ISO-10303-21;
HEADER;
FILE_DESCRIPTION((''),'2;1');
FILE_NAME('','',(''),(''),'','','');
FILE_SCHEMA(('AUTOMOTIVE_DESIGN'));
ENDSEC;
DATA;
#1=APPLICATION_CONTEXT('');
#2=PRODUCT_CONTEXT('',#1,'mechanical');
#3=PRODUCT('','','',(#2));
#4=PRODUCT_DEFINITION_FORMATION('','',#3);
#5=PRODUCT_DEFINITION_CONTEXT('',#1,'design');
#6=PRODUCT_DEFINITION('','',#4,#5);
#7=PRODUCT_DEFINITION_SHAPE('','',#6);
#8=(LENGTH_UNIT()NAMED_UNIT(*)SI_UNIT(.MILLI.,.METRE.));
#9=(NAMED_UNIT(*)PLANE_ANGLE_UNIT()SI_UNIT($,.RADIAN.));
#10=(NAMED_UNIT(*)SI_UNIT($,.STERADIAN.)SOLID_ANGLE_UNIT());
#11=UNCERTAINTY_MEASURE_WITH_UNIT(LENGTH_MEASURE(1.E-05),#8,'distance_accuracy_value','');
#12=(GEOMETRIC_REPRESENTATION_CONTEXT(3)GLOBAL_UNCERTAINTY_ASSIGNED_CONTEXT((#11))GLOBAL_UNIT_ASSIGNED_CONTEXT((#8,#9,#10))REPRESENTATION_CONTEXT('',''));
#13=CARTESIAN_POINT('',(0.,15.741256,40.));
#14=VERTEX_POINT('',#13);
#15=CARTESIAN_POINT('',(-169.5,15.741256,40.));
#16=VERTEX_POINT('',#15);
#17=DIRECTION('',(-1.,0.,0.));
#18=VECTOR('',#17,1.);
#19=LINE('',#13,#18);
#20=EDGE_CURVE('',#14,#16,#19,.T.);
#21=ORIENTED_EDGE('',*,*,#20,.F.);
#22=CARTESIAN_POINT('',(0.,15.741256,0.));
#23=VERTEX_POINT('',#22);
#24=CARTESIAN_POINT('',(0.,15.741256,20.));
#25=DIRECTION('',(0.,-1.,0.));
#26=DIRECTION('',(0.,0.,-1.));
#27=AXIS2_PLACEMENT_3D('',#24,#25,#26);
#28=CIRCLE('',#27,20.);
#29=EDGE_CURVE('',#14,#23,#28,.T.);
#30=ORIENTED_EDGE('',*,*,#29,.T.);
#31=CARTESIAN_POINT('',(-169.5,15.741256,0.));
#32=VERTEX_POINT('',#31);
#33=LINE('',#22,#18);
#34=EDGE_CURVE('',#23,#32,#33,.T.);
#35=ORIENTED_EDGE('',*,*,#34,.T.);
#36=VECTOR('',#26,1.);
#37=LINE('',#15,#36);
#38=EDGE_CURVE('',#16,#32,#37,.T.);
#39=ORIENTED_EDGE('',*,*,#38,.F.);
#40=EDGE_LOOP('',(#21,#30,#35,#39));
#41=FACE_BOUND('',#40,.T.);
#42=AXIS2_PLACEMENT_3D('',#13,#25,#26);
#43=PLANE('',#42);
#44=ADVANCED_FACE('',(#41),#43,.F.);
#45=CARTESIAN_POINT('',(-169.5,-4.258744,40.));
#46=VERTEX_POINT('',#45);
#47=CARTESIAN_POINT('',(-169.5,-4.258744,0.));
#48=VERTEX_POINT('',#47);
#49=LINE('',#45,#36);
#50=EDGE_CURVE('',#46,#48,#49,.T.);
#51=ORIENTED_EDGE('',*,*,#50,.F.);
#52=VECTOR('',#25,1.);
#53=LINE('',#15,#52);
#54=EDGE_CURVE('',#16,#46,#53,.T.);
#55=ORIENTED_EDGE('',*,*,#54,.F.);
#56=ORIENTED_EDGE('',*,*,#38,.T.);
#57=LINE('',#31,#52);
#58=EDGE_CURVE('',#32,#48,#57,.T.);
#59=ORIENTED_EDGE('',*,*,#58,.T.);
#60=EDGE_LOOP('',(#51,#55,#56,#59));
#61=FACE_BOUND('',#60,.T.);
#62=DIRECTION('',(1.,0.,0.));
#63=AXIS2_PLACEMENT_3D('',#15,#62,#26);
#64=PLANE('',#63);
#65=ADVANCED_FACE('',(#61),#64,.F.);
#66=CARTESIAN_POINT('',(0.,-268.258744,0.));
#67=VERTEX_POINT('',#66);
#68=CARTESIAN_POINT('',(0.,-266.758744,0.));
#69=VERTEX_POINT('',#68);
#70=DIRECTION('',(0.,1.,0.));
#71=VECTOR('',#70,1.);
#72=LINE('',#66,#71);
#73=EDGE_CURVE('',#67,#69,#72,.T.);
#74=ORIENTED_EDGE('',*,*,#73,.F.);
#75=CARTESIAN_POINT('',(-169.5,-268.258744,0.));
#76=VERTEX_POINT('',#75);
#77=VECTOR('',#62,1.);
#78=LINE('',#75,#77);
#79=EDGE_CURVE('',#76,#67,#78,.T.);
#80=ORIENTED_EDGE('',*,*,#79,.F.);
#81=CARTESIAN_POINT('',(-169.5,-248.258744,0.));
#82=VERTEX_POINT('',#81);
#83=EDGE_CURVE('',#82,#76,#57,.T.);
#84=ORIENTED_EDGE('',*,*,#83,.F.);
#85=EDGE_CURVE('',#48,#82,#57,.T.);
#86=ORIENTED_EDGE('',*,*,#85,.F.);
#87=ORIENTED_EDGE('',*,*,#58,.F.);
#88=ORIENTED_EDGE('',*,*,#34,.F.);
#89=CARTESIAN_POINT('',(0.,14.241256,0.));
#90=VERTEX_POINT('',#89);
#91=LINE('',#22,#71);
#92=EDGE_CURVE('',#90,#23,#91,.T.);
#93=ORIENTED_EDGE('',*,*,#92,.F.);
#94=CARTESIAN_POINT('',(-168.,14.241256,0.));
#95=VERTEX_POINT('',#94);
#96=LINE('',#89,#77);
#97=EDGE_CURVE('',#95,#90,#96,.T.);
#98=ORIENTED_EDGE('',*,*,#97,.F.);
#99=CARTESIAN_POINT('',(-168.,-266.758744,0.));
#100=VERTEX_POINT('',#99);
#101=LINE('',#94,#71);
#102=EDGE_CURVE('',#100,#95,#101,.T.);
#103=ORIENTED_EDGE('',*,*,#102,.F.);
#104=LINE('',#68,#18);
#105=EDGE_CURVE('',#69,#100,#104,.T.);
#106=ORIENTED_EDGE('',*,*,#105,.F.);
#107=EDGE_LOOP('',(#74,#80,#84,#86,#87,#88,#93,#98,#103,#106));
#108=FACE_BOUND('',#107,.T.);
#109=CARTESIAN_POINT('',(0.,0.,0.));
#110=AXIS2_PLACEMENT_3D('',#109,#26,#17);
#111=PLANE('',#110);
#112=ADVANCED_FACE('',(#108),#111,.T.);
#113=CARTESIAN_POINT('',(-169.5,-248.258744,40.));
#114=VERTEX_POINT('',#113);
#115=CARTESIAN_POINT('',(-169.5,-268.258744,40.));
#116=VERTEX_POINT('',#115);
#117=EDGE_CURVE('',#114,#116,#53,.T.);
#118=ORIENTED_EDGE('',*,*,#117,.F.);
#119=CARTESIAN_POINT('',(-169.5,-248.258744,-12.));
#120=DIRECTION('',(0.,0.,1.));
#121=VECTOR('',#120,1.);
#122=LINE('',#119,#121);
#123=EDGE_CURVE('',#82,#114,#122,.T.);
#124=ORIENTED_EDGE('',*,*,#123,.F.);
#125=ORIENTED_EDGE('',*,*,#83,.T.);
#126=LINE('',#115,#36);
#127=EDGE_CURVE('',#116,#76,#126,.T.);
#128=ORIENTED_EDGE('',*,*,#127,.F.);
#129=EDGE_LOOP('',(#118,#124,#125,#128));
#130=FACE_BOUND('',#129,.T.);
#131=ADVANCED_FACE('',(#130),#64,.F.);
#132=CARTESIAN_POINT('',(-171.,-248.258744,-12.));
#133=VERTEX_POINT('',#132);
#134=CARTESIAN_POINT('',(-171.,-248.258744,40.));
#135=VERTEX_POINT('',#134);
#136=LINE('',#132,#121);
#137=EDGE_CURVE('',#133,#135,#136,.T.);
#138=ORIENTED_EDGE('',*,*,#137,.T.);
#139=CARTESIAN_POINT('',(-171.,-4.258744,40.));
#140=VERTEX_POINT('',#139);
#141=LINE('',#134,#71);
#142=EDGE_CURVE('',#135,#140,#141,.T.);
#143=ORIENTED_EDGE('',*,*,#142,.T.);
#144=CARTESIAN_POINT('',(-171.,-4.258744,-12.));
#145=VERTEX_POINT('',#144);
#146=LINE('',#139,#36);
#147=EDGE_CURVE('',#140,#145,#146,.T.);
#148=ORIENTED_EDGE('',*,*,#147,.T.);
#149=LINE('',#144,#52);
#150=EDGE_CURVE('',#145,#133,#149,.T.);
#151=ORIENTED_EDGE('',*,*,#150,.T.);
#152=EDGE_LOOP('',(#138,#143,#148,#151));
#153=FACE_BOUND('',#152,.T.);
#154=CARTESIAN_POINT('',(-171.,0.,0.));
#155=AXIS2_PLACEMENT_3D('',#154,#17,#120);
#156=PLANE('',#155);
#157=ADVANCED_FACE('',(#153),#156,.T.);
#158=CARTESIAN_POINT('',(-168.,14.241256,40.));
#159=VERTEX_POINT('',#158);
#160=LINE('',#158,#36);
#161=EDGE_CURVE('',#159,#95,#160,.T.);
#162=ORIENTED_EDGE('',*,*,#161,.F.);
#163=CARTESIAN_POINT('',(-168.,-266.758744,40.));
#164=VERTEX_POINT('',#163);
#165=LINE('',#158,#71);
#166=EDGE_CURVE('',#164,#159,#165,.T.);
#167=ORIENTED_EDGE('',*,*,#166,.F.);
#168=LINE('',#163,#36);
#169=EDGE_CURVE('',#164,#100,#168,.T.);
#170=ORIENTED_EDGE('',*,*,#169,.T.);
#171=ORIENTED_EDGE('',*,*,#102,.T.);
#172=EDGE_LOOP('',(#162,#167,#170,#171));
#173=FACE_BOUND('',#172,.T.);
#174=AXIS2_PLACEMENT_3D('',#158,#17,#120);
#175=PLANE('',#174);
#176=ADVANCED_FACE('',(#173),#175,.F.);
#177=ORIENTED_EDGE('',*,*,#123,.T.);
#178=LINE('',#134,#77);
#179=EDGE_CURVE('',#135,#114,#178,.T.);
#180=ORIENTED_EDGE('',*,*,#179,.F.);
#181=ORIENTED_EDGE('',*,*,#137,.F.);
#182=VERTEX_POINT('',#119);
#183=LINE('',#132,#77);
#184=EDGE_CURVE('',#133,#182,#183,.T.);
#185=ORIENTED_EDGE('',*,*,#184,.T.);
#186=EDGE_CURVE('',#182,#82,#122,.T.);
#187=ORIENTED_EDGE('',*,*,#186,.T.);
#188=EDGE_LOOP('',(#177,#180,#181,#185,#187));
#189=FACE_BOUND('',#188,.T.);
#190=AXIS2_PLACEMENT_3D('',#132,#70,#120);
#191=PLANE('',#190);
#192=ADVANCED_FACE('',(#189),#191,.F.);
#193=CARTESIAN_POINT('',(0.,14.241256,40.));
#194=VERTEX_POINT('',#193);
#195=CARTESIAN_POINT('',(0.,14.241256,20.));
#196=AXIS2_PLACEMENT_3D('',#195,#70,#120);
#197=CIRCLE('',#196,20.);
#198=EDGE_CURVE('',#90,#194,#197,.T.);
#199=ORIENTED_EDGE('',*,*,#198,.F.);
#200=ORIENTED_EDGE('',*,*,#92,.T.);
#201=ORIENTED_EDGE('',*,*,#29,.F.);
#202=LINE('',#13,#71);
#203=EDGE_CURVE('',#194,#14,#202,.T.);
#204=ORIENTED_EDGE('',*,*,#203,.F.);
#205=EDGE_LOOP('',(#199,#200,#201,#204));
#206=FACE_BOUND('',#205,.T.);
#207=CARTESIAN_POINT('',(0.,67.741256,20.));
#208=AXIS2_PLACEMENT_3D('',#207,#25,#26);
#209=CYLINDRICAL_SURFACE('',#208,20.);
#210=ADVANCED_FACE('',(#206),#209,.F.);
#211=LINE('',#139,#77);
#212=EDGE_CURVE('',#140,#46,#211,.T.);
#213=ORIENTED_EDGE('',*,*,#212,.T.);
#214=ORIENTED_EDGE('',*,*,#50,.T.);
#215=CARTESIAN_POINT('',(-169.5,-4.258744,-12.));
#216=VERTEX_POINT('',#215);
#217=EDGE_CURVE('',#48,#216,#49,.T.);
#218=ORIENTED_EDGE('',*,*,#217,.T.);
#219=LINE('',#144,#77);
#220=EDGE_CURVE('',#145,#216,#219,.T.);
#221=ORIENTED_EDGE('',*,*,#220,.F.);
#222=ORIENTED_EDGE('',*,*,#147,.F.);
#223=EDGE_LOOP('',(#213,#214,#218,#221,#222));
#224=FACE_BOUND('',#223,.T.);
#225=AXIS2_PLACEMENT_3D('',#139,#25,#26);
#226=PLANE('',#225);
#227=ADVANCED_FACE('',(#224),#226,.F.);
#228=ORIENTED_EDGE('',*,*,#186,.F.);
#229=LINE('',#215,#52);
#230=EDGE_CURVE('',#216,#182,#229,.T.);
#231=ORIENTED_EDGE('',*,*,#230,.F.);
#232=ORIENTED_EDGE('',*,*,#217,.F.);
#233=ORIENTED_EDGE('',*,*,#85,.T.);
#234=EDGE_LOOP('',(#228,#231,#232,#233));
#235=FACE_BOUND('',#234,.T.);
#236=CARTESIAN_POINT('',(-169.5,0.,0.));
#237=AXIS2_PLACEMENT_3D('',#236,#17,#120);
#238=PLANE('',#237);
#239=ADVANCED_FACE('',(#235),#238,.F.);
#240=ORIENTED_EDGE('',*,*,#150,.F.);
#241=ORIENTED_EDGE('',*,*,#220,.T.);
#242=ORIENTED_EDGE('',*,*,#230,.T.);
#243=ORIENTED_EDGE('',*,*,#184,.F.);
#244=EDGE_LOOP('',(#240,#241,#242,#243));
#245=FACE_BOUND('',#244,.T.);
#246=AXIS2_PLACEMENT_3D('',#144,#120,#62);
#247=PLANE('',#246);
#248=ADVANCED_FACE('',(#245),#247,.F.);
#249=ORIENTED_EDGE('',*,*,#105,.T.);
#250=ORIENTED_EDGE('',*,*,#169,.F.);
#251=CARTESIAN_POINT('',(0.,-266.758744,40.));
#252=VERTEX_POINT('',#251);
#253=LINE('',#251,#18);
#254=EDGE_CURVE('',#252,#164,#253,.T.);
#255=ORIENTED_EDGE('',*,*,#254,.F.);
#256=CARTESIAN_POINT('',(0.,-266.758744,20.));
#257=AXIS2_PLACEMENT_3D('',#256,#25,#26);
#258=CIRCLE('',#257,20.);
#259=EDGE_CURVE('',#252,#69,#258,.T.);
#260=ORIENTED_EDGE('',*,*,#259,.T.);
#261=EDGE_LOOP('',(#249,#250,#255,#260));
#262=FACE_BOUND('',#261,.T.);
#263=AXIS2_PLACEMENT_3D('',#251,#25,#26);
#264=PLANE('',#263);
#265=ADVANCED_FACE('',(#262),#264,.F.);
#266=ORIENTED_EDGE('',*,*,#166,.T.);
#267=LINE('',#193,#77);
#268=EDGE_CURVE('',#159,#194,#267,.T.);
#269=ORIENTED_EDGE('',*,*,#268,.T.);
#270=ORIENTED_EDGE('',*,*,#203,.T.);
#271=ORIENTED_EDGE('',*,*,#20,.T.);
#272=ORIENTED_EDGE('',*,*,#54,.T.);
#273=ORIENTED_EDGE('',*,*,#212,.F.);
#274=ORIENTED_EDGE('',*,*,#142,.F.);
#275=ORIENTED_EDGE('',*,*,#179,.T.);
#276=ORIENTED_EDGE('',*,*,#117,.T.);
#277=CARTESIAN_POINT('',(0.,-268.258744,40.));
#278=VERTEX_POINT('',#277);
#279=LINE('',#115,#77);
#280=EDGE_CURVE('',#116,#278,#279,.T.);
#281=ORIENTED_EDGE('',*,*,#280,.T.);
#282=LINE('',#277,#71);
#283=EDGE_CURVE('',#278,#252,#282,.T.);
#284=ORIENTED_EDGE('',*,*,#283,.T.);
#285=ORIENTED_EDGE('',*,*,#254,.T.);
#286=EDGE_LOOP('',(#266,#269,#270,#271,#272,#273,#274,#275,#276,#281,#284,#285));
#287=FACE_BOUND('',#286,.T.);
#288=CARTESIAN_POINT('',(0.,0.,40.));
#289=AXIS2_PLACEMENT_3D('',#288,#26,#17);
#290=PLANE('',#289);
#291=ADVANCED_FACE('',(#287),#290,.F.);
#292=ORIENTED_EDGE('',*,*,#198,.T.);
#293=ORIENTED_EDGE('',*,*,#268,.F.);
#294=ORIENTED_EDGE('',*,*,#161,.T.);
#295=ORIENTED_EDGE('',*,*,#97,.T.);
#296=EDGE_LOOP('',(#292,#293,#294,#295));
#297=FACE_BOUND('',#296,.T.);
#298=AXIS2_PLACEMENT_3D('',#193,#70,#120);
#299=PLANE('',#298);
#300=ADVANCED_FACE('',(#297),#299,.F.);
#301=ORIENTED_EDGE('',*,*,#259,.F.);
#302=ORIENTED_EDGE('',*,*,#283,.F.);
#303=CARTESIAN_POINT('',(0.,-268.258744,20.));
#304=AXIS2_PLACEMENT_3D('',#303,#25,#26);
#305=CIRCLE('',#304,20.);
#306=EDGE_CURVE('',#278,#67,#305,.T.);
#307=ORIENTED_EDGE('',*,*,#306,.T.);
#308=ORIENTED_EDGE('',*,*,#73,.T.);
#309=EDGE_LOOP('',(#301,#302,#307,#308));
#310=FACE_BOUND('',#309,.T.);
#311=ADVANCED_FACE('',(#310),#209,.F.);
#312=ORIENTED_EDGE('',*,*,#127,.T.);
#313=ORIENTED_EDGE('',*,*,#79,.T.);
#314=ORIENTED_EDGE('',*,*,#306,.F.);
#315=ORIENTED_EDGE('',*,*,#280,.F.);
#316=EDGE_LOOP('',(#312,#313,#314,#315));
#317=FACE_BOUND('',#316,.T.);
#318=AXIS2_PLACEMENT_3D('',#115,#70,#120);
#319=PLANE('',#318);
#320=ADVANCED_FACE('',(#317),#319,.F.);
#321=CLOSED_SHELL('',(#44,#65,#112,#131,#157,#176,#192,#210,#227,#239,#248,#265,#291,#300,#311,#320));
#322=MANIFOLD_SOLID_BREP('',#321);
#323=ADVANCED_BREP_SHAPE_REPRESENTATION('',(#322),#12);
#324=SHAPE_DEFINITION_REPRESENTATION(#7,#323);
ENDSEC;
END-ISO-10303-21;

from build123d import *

# Parameters (mm, degrees)
EXTRUDE_1_DEPTH     = 40
SKETCH_2_R          = 20
CUT_EXTRUDE_1_DEPTH = 336
SKETCH_3_W          = 52
SKETCH_3_H          = 244
EXTRUDE_2_DEPTH     = 1.5


with BuildPart() as part:
    # 草图1 → 凸台-拉伸1 (new body)
    with BuildSketch(Plane.XY):
        Polygon((0, 15.741255831), (-169.5, 15.741255831), (-169.5, -268.258744169), (0, -268.258744169), (0, -266.758744169), (-168, -266.758744169), (-168, 14.241255831), (0, 14.241255831), align=None)
    extrude(amount=EXTRUDE_1_DEPTH)

    # 草图2 → 切除-拉伸1 (cut)
    with BuildSketch(Plane(origin=(0, -268.258744169, 0), x_dir=(-1, 0, 0), z_dir=(0, -1, 0))):
        with Locations((0, -20)):
            Circle(SKETCH_2_R)
    extrude(amount=-CUT_EXTRUDE_1_DEPTH, mode=Mode.SUBTRACT)

    # 草图3 → 凸台-拉伸2 (add)
    with BuildSketch(Plane.ZY.offset(169.5)):
        with Locations((14, -126.258744169)):
            Rectangle(SKETCH_3_W, SKETCH_3_H)
    extrude(amount=EXTRUDE_2_DEPTH)


solid = part.part
